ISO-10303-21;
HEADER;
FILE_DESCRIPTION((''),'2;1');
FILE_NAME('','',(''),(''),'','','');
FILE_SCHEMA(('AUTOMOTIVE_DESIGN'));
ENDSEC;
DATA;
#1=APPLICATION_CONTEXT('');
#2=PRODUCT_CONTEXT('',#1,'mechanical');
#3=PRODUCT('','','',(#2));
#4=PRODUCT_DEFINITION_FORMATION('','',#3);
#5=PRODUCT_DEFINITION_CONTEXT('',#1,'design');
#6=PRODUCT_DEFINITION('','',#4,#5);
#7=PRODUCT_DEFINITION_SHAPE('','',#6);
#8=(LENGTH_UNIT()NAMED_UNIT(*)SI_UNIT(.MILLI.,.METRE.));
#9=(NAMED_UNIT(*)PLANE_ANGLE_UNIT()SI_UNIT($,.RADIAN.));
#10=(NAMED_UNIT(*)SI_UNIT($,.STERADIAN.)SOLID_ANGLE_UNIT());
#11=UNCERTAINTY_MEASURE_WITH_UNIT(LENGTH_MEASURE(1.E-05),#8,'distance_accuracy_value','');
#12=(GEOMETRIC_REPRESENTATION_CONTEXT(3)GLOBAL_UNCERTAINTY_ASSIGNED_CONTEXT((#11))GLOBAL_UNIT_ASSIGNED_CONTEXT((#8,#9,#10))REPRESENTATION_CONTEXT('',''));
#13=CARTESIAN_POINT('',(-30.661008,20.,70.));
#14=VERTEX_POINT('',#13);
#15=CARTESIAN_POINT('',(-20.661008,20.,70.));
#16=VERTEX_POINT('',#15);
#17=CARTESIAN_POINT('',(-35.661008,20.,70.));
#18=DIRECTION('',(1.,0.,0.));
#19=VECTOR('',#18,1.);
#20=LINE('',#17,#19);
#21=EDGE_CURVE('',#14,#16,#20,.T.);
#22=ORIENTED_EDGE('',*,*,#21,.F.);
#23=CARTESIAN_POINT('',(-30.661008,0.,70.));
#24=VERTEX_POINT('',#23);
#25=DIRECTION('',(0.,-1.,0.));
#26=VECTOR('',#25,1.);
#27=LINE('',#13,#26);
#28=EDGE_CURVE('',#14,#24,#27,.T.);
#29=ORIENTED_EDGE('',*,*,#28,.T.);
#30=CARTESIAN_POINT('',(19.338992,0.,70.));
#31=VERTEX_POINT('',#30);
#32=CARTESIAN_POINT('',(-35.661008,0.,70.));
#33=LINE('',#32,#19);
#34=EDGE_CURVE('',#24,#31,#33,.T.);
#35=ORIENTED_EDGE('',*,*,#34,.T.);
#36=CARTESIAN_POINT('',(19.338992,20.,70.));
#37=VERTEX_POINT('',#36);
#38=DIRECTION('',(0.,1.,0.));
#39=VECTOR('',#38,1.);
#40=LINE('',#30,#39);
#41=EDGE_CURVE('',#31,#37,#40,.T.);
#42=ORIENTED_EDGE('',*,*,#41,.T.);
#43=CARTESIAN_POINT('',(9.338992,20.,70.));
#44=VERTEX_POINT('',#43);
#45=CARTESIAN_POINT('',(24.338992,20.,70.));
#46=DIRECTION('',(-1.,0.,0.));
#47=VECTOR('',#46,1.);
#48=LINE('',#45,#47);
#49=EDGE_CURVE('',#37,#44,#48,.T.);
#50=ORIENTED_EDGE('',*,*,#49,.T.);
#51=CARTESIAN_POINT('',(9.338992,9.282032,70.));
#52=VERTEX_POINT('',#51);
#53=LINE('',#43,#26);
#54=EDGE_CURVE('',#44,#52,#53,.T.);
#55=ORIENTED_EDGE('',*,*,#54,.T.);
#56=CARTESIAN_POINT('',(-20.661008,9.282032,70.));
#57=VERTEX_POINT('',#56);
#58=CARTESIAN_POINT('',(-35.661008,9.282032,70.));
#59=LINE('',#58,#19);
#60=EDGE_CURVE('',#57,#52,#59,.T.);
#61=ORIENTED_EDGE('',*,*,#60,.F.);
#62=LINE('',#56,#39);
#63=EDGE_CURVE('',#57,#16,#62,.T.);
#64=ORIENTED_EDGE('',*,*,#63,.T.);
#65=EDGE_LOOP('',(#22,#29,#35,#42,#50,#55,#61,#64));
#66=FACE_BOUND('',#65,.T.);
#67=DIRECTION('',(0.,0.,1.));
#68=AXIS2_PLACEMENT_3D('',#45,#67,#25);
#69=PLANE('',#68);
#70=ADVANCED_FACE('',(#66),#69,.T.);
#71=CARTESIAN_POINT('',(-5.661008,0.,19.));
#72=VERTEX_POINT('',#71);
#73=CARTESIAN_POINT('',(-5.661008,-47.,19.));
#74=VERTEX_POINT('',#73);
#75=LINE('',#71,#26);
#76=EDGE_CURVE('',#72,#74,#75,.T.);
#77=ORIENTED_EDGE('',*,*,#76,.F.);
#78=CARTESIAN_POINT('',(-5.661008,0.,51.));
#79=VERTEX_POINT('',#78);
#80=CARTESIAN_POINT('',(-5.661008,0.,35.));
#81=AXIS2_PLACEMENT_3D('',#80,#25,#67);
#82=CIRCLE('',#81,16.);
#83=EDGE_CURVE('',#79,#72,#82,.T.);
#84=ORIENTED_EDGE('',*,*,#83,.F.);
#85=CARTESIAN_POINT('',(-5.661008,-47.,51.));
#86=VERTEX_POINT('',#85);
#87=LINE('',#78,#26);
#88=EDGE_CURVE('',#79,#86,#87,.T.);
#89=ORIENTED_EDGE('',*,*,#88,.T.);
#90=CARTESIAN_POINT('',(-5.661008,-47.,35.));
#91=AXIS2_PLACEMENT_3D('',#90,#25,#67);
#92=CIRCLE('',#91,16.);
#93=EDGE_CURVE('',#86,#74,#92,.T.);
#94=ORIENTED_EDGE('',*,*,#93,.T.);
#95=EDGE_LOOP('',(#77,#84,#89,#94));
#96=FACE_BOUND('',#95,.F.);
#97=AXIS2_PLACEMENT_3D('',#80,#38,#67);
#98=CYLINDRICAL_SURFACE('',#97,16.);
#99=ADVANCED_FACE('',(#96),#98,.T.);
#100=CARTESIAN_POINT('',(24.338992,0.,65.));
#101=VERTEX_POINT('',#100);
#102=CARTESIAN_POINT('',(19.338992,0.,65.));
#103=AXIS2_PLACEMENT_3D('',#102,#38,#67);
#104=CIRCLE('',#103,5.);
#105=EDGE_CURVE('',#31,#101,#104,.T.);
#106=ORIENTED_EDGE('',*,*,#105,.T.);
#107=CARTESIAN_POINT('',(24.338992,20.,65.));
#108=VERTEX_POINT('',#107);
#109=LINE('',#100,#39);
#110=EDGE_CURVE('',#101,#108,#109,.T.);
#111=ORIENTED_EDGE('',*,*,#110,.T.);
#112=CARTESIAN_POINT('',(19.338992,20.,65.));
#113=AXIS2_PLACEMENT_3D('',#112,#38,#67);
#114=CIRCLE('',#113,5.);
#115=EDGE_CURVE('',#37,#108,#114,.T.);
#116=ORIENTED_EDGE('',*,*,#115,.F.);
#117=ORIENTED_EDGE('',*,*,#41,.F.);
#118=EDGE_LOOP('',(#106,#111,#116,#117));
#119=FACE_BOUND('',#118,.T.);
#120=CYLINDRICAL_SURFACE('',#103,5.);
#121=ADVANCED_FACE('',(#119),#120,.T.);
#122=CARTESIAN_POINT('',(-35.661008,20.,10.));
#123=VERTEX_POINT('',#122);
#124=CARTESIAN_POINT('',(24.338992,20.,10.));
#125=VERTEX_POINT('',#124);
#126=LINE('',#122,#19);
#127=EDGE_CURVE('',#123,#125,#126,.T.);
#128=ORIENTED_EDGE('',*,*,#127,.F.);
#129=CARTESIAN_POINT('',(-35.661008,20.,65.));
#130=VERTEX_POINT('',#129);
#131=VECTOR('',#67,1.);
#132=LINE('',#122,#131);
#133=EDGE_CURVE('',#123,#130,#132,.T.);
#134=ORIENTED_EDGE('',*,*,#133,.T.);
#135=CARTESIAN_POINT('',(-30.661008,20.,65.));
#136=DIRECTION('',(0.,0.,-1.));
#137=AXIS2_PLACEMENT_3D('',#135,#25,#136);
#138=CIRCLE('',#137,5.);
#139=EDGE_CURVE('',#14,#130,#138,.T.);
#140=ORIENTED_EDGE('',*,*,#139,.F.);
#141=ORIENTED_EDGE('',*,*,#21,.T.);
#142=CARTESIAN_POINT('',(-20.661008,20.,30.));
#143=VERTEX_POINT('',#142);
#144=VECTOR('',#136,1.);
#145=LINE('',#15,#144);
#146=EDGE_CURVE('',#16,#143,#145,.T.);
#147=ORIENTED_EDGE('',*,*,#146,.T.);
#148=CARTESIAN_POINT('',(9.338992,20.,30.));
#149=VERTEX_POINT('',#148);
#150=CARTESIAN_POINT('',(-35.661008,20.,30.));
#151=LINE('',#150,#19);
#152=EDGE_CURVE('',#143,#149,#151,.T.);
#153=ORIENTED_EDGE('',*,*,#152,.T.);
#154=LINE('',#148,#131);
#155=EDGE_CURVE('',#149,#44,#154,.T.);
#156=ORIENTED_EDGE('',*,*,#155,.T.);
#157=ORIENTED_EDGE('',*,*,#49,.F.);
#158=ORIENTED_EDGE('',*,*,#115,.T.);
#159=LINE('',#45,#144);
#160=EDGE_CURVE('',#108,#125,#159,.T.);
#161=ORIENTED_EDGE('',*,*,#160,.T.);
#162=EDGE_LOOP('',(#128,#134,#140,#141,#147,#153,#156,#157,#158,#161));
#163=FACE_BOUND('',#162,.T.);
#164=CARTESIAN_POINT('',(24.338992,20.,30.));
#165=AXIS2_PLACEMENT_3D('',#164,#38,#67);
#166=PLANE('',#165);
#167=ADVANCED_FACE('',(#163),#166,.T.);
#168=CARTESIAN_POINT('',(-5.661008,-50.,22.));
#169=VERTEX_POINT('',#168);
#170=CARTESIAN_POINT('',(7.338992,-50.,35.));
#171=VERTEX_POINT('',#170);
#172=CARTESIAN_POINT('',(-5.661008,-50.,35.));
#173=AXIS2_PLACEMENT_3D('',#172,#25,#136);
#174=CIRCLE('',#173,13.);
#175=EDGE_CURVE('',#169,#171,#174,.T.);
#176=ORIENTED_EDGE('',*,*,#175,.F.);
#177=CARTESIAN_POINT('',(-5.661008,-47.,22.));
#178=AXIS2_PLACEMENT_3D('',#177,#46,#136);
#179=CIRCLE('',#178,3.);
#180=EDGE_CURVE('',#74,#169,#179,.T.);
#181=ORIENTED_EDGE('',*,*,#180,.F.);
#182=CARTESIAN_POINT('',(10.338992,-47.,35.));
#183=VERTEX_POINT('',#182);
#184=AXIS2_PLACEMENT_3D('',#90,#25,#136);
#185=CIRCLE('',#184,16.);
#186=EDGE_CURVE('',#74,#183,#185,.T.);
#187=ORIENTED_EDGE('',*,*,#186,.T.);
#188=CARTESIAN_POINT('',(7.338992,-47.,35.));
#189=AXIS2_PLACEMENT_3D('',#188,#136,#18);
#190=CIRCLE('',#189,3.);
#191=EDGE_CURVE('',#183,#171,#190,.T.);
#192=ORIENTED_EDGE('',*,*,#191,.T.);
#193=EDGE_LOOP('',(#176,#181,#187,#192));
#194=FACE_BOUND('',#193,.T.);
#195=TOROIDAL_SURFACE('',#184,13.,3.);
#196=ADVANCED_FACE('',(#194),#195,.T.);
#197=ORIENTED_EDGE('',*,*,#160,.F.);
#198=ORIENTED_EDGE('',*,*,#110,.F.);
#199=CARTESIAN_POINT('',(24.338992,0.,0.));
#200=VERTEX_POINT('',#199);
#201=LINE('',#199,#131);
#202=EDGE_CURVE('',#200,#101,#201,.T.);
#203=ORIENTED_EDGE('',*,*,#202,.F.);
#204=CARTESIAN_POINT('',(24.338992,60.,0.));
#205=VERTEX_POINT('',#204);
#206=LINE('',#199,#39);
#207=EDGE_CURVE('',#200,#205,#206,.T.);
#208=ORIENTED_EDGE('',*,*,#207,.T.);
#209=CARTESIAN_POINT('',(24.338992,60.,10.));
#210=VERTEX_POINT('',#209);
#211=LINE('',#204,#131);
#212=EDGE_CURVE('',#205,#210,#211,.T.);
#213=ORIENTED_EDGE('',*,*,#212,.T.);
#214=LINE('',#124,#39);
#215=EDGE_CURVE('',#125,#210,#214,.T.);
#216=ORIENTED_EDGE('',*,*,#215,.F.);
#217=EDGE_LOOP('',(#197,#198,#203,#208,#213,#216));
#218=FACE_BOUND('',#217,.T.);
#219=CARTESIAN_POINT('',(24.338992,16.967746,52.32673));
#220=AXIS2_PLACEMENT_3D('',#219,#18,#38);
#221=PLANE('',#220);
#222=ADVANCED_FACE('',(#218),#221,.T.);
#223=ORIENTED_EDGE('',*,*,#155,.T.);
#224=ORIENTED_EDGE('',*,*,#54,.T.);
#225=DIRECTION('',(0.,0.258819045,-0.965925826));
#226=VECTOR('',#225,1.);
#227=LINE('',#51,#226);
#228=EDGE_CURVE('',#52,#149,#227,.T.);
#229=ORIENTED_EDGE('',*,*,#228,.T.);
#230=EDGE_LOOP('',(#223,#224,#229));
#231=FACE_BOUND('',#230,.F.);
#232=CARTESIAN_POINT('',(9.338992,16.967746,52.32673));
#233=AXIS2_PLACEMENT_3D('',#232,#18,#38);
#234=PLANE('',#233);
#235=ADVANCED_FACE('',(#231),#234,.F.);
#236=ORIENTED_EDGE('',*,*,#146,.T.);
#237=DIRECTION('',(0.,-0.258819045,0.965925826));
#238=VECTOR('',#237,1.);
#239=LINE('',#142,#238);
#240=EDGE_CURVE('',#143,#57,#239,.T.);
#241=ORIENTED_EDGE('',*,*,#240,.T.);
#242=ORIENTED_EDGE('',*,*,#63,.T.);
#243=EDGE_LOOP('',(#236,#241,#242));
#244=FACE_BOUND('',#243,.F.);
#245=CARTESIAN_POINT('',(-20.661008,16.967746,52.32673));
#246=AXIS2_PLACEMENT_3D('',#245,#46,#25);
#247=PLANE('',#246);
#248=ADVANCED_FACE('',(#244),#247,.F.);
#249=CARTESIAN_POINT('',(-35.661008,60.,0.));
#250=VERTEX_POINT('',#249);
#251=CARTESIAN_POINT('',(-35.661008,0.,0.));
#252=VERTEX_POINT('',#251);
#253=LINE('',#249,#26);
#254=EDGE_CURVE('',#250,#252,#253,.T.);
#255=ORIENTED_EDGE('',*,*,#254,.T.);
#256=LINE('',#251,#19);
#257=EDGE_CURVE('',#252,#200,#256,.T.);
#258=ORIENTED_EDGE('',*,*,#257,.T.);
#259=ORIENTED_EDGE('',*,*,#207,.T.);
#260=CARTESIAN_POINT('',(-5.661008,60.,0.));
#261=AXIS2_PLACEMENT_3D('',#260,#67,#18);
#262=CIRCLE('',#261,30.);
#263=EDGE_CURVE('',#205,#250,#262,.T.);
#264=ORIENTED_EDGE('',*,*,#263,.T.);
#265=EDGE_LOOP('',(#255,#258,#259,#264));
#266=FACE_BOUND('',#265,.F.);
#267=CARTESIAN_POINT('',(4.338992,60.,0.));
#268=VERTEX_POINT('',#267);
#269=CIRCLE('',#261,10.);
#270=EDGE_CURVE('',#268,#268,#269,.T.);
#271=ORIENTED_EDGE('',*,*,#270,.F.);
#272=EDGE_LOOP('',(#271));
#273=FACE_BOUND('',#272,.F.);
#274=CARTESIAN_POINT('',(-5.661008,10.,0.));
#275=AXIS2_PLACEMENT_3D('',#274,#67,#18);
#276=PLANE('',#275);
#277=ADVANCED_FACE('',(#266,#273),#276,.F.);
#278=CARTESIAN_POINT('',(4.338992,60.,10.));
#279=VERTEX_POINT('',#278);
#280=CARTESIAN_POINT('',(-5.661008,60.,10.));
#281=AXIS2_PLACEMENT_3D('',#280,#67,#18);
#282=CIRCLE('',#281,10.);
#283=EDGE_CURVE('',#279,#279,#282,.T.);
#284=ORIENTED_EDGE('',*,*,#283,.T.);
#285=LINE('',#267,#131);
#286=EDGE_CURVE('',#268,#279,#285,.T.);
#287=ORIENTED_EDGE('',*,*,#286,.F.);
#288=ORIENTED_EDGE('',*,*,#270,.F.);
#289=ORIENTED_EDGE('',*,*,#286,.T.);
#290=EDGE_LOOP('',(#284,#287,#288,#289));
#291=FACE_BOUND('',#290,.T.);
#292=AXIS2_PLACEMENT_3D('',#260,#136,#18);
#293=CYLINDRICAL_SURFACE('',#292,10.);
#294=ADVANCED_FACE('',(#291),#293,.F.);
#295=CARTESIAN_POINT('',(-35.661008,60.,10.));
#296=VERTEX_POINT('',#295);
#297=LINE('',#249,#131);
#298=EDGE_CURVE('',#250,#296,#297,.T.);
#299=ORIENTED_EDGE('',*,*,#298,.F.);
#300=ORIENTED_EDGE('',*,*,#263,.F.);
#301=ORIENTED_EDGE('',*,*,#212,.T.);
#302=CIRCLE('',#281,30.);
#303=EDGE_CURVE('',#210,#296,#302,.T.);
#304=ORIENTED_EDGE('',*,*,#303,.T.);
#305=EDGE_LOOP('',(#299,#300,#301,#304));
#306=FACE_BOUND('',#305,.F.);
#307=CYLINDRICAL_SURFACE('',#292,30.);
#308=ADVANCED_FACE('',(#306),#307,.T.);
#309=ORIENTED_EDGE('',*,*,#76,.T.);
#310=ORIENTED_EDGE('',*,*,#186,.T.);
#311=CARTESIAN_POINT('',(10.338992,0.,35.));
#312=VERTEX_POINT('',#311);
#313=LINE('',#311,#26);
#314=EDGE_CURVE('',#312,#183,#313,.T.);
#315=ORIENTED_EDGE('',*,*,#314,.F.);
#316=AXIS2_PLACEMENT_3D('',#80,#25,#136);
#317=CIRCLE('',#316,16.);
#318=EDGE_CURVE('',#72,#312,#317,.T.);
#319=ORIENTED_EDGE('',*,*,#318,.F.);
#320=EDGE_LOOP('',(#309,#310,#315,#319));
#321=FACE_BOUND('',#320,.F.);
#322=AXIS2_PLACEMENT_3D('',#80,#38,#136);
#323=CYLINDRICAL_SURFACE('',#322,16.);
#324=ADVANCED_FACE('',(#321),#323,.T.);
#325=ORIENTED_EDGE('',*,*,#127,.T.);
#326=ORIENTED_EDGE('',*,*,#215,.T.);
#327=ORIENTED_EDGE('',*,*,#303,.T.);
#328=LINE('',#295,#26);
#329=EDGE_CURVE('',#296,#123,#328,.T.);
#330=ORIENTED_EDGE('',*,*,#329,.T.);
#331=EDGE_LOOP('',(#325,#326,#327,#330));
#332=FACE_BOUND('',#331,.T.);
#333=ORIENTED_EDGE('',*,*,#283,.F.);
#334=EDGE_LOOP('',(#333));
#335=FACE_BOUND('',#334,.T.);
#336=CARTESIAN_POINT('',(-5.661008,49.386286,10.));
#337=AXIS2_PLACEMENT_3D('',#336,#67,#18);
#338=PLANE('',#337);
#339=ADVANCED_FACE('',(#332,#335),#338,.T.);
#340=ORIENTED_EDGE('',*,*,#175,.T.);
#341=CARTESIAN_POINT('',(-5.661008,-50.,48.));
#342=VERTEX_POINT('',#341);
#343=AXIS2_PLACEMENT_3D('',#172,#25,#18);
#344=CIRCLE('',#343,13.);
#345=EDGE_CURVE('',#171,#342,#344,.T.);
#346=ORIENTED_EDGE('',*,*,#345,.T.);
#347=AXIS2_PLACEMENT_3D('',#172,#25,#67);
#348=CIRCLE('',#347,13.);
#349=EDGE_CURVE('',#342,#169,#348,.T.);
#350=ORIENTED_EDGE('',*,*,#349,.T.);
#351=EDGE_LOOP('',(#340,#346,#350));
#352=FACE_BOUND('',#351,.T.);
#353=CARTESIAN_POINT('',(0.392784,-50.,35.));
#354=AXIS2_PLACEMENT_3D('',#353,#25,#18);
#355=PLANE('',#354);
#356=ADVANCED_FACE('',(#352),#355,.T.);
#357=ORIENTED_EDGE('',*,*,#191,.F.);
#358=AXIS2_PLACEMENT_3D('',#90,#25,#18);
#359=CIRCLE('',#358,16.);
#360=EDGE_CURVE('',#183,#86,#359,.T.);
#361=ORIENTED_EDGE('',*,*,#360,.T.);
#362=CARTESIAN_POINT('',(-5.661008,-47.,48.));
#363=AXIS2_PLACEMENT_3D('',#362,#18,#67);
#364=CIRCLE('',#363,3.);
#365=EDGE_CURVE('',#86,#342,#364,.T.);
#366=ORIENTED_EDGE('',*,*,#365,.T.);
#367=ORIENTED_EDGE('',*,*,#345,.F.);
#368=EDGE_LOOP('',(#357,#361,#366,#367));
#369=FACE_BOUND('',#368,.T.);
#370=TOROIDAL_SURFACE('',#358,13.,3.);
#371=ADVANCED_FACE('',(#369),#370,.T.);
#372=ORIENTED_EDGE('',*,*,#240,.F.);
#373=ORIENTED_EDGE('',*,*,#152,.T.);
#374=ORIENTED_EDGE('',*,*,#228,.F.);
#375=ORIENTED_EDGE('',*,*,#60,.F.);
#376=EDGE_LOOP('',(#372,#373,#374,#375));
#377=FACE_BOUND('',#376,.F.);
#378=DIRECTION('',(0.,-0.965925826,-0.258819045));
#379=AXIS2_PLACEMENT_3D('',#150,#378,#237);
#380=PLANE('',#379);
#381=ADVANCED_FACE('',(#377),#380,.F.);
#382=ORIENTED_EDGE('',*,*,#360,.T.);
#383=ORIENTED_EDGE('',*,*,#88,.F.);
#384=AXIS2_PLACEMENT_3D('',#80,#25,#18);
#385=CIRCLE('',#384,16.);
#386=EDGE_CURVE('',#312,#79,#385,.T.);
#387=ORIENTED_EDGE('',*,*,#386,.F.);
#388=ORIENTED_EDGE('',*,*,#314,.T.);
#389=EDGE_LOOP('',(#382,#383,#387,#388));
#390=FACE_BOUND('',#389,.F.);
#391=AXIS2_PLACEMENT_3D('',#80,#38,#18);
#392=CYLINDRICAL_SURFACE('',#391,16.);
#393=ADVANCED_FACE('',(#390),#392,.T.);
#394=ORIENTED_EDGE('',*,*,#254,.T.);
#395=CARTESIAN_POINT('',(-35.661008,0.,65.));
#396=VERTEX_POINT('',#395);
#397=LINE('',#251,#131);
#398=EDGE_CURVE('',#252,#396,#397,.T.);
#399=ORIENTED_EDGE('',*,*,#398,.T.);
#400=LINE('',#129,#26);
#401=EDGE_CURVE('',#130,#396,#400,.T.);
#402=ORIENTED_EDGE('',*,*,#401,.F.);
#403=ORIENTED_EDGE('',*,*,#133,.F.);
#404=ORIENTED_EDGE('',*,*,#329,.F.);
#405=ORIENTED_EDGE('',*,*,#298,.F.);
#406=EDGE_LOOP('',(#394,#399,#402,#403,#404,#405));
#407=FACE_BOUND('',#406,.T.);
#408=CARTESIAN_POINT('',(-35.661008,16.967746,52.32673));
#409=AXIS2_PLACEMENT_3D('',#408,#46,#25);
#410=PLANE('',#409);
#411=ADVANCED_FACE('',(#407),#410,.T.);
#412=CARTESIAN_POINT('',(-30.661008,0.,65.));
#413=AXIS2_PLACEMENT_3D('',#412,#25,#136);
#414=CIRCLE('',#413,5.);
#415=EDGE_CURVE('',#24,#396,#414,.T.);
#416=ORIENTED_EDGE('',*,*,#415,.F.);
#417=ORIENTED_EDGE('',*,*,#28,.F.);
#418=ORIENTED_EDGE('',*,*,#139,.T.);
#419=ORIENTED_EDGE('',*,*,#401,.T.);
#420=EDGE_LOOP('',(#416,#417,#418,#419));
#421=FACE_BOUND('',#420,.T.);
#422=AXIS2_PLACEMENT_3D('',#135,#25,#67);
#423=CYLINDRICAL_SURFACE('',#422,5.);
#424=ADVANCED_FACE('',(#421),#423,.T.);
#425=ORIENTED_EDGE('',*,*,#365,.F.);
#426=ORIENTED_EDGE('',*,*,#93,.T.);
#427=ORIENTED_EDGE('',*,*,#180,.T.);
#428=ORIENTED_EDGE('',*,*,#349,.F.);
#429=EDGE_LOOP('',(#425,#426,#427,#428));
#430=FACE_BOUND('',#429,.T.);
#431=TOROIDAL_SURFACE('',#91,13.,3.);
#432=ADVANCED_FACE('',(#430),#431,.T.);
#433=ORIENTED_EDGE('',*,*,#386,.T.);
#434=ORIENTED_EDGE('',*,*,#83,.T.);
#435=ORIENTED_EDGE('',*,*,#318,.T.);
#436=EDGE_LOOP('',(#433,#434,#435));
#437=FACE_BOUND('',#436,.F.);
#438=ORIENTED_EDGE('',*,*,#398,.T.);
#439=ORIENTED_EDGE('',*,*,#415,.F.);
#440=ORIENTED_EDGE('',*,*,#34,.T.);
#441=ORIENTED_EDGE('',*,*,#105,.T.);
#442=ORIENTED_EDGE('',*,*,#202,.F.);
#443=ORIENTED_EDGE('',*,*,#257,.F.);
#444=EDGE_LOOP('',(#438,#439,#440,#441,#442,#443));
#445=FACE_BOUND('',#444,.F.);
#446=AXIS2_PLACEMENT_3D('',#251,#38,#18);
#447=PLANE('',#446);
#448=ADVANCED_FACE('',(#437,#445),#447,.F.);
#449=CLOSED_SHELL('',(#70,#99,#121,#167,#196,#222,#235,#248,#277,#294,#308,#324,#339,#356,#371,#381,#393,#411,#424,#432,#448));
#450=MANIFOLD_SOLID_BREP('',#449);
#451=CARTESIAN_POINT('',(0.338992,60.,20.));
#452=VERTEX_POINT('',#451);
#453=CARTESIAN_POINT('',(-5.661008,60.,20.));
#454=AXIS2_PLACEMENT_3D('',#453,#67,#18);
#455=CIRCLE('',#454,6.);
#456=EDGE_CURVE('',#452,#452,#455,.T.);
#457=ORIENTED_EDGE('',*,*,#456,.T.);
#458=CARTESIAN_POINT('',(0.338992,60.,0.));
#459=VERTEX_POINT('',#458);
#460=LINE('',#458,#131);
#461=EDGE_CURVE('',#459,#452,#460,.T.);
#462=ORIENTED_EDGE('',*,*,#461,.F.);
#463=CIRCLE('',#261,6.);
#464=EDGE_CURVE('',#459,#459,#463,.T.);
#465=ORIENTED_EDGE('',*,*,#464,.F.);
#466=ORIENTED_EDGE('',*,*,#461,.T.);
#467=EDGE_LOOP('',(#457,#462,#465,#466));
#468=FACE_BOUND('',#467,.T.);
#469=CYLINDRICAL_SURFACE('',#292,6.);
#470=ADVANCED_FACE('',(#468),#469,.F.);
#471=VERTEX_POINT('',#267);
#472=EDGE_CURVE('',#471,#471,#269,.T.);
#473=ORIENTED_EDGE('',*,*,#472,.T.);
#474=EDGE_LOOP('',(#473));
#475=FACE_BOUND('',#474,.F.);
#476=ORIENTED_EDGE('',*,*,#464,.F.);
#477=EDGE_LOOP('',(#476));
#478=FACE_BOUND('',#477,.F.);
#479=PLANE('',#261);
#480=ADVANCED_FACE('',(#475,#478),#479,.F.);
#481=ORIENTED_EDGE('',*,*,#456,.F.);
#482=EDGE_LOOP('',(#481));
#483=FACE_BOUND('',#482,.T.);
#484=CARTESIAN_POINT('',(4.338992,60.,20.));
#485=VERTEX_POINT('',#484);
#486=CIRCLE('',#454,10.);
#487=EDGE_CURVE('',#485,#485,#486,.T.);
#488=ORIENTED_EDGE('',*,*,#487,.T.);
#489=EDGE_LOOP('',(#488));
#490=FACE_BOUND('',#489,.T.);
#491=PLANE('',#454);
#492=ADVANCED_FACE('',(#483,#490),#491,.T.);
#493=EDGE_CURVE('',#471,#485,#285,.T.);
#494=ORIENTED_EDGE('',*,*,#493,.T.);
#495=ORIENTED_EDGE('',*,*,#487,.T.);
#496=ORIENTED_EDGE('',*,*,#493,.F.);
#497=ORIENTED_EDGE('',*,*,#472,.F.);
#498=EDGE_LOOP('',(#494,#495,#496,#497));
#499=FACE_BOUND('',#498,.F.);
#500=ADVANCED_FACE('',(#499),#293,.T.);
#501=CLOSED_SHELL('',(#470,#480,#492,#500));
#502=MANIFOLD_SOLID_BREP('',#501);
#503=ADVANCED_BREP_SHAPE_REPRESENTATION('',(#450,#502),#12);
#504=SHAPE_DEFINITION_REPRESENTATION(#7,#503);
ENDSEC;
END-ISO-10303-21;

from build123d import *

# Parameters (mm, degrees)
F0_R      = 10
F1_DEPTH  = 10
F0_R_2    = 6
F2_DEPTH  = 20
F3_DEPTH  = 70
F5_DEPTH  = 60
F6_DEPTH  = 15
F8_R      = 5
F9_DEPTH  = 15
F10_R     = 5
F12_DEPTH = 50
F13_R     = 3


# Not quite as in the source:
# - a feature names something its author has since deleted; it is built from what else it names


with BuildPart() as f1:
    # F0 (on Top) → F1 (new body)
    with BuildSketch(Plane.XY):
        with BuildLine():
            Line((-35.661008209, 60), (-35.661008209, 20))
            Line((-35.661008209, 20), (24.338991791, 20))
            Line((24.338991791, 20), (24.338991791, 60))
            ThreePointArc((24.338991791, 60), (15.5521952266, 81.2132034356), (-5.661008209, 90))
            ThreePointArc((-5.661008209, 90), (-26.8742116446, 81.2132034356), (-35.661008209, 60))
        make_face()
        with Locations((-5.661008209, 60)):
            Circle(F0_R, mode=Mode.SUBTRACT)
    extrude(amount=F1_DEPTH)

    # F0 (on Top) → F3 (join)
    with BuildSketch(Plane.XY):
        Polygon((-35.661008209, 0), (-21.661008209, 0), (10.338991791, 0), (24.338991791, 0), (24.338991791, 20), (-35.661008209, 20), align=None)
    extrude(amount=F3_DEPTH)

    # F4 (on face) → F5 (cut)
    with BuildSketch(Plane(origin=(-35.661008209, 0, 0), x_dir=(0, -1, 0), z_dir=(-1, 0, 0))):
        Polygon((-9.2820323028, 70), (-20, 70), (-20, 30), align=None)
    extrude(amount=-F5_DEPTH, mode=Mode.SUBTRACT)

    # F4 (on face) → F6 (join)
    with BuildSketch(Plane(origin=(-35.661008209, 0, 0), x_dir=(0, -1, 0), z_dir=(-1, 0, 0))):
        Polygon((-9.2820323028, 70), (-20, 70), (-20, 30), align=None)
    extrude(amount=-F6_DEPTH)

    # F8
    f8_edges = [f1.edges().sort_by_distance(p)[0] for p in [
        (-35.661008, 10, 70),
    ]]
    fillet(f8_edges, radius=F8_R)

    # F7 (on face) → F9 (join)
    with BuildSketch(Plane.YZ.offset(24.338991791)):
        Polygon((20, 70), (9.2820323028, 70), (20, 30), align=None)
    extrude(amount=-F9_DEPTH)

    # F10
    f10_edges = [f1.edges().sort_by_distance(p)[0] for p in [
        (24.338992, 10, 70),
    ]]
    fillet(f10_edges, radius=F10_R)

    # F11 (on face) → F12 (join)
    with BuildSketch(Plane.XZ):
        with BuildLine():
            Line((-5.661008209, 35), (-5.661008209, 19))
            ThreePointArc((-5.661008209, 19), (5.65270029, 23.686291501), (10.338991791, 35))
            ThreePointArc((10.338991791, 35), (5.65270029, 46.313708499), (-5.661008209, 51))
            Line((-5.661008209, 51), (-5.661008209, 35))
        make_face()
        with BuildLine():
            ThreePointArc((-5.661008209, 51), (-21.661008209, 35), (-5.661008209, 19))
            Line((-5.661008209, 19), (-5.661008209, 35))
            Line((-5.661008209, 35), (-5.661008209, 51))
        make_face()
    extrude(amount=F12_DEPTH)

    # F13
    f13_edges = [f1.edges().sort_by_distance(p)[0] for p in [
        (-5.661008, -50, 19),
    ]]
    fillet(f13_edges, radius=F13_R)


with BuildPart() as f2:
    # F0 (on Top) → F2 (new body)
    with BuildSketch(Plane.XY):
        with Locations((-5.661008209, 60)):
            Circle(F0_R)
        with Locations((-5.661008209, 60)):
            Circle(F0_R_2, mode=Mode.SUBTRACT)
    extrude(amount=F2_DEPTH)


solid = Compound([f1.part, f2.part])
